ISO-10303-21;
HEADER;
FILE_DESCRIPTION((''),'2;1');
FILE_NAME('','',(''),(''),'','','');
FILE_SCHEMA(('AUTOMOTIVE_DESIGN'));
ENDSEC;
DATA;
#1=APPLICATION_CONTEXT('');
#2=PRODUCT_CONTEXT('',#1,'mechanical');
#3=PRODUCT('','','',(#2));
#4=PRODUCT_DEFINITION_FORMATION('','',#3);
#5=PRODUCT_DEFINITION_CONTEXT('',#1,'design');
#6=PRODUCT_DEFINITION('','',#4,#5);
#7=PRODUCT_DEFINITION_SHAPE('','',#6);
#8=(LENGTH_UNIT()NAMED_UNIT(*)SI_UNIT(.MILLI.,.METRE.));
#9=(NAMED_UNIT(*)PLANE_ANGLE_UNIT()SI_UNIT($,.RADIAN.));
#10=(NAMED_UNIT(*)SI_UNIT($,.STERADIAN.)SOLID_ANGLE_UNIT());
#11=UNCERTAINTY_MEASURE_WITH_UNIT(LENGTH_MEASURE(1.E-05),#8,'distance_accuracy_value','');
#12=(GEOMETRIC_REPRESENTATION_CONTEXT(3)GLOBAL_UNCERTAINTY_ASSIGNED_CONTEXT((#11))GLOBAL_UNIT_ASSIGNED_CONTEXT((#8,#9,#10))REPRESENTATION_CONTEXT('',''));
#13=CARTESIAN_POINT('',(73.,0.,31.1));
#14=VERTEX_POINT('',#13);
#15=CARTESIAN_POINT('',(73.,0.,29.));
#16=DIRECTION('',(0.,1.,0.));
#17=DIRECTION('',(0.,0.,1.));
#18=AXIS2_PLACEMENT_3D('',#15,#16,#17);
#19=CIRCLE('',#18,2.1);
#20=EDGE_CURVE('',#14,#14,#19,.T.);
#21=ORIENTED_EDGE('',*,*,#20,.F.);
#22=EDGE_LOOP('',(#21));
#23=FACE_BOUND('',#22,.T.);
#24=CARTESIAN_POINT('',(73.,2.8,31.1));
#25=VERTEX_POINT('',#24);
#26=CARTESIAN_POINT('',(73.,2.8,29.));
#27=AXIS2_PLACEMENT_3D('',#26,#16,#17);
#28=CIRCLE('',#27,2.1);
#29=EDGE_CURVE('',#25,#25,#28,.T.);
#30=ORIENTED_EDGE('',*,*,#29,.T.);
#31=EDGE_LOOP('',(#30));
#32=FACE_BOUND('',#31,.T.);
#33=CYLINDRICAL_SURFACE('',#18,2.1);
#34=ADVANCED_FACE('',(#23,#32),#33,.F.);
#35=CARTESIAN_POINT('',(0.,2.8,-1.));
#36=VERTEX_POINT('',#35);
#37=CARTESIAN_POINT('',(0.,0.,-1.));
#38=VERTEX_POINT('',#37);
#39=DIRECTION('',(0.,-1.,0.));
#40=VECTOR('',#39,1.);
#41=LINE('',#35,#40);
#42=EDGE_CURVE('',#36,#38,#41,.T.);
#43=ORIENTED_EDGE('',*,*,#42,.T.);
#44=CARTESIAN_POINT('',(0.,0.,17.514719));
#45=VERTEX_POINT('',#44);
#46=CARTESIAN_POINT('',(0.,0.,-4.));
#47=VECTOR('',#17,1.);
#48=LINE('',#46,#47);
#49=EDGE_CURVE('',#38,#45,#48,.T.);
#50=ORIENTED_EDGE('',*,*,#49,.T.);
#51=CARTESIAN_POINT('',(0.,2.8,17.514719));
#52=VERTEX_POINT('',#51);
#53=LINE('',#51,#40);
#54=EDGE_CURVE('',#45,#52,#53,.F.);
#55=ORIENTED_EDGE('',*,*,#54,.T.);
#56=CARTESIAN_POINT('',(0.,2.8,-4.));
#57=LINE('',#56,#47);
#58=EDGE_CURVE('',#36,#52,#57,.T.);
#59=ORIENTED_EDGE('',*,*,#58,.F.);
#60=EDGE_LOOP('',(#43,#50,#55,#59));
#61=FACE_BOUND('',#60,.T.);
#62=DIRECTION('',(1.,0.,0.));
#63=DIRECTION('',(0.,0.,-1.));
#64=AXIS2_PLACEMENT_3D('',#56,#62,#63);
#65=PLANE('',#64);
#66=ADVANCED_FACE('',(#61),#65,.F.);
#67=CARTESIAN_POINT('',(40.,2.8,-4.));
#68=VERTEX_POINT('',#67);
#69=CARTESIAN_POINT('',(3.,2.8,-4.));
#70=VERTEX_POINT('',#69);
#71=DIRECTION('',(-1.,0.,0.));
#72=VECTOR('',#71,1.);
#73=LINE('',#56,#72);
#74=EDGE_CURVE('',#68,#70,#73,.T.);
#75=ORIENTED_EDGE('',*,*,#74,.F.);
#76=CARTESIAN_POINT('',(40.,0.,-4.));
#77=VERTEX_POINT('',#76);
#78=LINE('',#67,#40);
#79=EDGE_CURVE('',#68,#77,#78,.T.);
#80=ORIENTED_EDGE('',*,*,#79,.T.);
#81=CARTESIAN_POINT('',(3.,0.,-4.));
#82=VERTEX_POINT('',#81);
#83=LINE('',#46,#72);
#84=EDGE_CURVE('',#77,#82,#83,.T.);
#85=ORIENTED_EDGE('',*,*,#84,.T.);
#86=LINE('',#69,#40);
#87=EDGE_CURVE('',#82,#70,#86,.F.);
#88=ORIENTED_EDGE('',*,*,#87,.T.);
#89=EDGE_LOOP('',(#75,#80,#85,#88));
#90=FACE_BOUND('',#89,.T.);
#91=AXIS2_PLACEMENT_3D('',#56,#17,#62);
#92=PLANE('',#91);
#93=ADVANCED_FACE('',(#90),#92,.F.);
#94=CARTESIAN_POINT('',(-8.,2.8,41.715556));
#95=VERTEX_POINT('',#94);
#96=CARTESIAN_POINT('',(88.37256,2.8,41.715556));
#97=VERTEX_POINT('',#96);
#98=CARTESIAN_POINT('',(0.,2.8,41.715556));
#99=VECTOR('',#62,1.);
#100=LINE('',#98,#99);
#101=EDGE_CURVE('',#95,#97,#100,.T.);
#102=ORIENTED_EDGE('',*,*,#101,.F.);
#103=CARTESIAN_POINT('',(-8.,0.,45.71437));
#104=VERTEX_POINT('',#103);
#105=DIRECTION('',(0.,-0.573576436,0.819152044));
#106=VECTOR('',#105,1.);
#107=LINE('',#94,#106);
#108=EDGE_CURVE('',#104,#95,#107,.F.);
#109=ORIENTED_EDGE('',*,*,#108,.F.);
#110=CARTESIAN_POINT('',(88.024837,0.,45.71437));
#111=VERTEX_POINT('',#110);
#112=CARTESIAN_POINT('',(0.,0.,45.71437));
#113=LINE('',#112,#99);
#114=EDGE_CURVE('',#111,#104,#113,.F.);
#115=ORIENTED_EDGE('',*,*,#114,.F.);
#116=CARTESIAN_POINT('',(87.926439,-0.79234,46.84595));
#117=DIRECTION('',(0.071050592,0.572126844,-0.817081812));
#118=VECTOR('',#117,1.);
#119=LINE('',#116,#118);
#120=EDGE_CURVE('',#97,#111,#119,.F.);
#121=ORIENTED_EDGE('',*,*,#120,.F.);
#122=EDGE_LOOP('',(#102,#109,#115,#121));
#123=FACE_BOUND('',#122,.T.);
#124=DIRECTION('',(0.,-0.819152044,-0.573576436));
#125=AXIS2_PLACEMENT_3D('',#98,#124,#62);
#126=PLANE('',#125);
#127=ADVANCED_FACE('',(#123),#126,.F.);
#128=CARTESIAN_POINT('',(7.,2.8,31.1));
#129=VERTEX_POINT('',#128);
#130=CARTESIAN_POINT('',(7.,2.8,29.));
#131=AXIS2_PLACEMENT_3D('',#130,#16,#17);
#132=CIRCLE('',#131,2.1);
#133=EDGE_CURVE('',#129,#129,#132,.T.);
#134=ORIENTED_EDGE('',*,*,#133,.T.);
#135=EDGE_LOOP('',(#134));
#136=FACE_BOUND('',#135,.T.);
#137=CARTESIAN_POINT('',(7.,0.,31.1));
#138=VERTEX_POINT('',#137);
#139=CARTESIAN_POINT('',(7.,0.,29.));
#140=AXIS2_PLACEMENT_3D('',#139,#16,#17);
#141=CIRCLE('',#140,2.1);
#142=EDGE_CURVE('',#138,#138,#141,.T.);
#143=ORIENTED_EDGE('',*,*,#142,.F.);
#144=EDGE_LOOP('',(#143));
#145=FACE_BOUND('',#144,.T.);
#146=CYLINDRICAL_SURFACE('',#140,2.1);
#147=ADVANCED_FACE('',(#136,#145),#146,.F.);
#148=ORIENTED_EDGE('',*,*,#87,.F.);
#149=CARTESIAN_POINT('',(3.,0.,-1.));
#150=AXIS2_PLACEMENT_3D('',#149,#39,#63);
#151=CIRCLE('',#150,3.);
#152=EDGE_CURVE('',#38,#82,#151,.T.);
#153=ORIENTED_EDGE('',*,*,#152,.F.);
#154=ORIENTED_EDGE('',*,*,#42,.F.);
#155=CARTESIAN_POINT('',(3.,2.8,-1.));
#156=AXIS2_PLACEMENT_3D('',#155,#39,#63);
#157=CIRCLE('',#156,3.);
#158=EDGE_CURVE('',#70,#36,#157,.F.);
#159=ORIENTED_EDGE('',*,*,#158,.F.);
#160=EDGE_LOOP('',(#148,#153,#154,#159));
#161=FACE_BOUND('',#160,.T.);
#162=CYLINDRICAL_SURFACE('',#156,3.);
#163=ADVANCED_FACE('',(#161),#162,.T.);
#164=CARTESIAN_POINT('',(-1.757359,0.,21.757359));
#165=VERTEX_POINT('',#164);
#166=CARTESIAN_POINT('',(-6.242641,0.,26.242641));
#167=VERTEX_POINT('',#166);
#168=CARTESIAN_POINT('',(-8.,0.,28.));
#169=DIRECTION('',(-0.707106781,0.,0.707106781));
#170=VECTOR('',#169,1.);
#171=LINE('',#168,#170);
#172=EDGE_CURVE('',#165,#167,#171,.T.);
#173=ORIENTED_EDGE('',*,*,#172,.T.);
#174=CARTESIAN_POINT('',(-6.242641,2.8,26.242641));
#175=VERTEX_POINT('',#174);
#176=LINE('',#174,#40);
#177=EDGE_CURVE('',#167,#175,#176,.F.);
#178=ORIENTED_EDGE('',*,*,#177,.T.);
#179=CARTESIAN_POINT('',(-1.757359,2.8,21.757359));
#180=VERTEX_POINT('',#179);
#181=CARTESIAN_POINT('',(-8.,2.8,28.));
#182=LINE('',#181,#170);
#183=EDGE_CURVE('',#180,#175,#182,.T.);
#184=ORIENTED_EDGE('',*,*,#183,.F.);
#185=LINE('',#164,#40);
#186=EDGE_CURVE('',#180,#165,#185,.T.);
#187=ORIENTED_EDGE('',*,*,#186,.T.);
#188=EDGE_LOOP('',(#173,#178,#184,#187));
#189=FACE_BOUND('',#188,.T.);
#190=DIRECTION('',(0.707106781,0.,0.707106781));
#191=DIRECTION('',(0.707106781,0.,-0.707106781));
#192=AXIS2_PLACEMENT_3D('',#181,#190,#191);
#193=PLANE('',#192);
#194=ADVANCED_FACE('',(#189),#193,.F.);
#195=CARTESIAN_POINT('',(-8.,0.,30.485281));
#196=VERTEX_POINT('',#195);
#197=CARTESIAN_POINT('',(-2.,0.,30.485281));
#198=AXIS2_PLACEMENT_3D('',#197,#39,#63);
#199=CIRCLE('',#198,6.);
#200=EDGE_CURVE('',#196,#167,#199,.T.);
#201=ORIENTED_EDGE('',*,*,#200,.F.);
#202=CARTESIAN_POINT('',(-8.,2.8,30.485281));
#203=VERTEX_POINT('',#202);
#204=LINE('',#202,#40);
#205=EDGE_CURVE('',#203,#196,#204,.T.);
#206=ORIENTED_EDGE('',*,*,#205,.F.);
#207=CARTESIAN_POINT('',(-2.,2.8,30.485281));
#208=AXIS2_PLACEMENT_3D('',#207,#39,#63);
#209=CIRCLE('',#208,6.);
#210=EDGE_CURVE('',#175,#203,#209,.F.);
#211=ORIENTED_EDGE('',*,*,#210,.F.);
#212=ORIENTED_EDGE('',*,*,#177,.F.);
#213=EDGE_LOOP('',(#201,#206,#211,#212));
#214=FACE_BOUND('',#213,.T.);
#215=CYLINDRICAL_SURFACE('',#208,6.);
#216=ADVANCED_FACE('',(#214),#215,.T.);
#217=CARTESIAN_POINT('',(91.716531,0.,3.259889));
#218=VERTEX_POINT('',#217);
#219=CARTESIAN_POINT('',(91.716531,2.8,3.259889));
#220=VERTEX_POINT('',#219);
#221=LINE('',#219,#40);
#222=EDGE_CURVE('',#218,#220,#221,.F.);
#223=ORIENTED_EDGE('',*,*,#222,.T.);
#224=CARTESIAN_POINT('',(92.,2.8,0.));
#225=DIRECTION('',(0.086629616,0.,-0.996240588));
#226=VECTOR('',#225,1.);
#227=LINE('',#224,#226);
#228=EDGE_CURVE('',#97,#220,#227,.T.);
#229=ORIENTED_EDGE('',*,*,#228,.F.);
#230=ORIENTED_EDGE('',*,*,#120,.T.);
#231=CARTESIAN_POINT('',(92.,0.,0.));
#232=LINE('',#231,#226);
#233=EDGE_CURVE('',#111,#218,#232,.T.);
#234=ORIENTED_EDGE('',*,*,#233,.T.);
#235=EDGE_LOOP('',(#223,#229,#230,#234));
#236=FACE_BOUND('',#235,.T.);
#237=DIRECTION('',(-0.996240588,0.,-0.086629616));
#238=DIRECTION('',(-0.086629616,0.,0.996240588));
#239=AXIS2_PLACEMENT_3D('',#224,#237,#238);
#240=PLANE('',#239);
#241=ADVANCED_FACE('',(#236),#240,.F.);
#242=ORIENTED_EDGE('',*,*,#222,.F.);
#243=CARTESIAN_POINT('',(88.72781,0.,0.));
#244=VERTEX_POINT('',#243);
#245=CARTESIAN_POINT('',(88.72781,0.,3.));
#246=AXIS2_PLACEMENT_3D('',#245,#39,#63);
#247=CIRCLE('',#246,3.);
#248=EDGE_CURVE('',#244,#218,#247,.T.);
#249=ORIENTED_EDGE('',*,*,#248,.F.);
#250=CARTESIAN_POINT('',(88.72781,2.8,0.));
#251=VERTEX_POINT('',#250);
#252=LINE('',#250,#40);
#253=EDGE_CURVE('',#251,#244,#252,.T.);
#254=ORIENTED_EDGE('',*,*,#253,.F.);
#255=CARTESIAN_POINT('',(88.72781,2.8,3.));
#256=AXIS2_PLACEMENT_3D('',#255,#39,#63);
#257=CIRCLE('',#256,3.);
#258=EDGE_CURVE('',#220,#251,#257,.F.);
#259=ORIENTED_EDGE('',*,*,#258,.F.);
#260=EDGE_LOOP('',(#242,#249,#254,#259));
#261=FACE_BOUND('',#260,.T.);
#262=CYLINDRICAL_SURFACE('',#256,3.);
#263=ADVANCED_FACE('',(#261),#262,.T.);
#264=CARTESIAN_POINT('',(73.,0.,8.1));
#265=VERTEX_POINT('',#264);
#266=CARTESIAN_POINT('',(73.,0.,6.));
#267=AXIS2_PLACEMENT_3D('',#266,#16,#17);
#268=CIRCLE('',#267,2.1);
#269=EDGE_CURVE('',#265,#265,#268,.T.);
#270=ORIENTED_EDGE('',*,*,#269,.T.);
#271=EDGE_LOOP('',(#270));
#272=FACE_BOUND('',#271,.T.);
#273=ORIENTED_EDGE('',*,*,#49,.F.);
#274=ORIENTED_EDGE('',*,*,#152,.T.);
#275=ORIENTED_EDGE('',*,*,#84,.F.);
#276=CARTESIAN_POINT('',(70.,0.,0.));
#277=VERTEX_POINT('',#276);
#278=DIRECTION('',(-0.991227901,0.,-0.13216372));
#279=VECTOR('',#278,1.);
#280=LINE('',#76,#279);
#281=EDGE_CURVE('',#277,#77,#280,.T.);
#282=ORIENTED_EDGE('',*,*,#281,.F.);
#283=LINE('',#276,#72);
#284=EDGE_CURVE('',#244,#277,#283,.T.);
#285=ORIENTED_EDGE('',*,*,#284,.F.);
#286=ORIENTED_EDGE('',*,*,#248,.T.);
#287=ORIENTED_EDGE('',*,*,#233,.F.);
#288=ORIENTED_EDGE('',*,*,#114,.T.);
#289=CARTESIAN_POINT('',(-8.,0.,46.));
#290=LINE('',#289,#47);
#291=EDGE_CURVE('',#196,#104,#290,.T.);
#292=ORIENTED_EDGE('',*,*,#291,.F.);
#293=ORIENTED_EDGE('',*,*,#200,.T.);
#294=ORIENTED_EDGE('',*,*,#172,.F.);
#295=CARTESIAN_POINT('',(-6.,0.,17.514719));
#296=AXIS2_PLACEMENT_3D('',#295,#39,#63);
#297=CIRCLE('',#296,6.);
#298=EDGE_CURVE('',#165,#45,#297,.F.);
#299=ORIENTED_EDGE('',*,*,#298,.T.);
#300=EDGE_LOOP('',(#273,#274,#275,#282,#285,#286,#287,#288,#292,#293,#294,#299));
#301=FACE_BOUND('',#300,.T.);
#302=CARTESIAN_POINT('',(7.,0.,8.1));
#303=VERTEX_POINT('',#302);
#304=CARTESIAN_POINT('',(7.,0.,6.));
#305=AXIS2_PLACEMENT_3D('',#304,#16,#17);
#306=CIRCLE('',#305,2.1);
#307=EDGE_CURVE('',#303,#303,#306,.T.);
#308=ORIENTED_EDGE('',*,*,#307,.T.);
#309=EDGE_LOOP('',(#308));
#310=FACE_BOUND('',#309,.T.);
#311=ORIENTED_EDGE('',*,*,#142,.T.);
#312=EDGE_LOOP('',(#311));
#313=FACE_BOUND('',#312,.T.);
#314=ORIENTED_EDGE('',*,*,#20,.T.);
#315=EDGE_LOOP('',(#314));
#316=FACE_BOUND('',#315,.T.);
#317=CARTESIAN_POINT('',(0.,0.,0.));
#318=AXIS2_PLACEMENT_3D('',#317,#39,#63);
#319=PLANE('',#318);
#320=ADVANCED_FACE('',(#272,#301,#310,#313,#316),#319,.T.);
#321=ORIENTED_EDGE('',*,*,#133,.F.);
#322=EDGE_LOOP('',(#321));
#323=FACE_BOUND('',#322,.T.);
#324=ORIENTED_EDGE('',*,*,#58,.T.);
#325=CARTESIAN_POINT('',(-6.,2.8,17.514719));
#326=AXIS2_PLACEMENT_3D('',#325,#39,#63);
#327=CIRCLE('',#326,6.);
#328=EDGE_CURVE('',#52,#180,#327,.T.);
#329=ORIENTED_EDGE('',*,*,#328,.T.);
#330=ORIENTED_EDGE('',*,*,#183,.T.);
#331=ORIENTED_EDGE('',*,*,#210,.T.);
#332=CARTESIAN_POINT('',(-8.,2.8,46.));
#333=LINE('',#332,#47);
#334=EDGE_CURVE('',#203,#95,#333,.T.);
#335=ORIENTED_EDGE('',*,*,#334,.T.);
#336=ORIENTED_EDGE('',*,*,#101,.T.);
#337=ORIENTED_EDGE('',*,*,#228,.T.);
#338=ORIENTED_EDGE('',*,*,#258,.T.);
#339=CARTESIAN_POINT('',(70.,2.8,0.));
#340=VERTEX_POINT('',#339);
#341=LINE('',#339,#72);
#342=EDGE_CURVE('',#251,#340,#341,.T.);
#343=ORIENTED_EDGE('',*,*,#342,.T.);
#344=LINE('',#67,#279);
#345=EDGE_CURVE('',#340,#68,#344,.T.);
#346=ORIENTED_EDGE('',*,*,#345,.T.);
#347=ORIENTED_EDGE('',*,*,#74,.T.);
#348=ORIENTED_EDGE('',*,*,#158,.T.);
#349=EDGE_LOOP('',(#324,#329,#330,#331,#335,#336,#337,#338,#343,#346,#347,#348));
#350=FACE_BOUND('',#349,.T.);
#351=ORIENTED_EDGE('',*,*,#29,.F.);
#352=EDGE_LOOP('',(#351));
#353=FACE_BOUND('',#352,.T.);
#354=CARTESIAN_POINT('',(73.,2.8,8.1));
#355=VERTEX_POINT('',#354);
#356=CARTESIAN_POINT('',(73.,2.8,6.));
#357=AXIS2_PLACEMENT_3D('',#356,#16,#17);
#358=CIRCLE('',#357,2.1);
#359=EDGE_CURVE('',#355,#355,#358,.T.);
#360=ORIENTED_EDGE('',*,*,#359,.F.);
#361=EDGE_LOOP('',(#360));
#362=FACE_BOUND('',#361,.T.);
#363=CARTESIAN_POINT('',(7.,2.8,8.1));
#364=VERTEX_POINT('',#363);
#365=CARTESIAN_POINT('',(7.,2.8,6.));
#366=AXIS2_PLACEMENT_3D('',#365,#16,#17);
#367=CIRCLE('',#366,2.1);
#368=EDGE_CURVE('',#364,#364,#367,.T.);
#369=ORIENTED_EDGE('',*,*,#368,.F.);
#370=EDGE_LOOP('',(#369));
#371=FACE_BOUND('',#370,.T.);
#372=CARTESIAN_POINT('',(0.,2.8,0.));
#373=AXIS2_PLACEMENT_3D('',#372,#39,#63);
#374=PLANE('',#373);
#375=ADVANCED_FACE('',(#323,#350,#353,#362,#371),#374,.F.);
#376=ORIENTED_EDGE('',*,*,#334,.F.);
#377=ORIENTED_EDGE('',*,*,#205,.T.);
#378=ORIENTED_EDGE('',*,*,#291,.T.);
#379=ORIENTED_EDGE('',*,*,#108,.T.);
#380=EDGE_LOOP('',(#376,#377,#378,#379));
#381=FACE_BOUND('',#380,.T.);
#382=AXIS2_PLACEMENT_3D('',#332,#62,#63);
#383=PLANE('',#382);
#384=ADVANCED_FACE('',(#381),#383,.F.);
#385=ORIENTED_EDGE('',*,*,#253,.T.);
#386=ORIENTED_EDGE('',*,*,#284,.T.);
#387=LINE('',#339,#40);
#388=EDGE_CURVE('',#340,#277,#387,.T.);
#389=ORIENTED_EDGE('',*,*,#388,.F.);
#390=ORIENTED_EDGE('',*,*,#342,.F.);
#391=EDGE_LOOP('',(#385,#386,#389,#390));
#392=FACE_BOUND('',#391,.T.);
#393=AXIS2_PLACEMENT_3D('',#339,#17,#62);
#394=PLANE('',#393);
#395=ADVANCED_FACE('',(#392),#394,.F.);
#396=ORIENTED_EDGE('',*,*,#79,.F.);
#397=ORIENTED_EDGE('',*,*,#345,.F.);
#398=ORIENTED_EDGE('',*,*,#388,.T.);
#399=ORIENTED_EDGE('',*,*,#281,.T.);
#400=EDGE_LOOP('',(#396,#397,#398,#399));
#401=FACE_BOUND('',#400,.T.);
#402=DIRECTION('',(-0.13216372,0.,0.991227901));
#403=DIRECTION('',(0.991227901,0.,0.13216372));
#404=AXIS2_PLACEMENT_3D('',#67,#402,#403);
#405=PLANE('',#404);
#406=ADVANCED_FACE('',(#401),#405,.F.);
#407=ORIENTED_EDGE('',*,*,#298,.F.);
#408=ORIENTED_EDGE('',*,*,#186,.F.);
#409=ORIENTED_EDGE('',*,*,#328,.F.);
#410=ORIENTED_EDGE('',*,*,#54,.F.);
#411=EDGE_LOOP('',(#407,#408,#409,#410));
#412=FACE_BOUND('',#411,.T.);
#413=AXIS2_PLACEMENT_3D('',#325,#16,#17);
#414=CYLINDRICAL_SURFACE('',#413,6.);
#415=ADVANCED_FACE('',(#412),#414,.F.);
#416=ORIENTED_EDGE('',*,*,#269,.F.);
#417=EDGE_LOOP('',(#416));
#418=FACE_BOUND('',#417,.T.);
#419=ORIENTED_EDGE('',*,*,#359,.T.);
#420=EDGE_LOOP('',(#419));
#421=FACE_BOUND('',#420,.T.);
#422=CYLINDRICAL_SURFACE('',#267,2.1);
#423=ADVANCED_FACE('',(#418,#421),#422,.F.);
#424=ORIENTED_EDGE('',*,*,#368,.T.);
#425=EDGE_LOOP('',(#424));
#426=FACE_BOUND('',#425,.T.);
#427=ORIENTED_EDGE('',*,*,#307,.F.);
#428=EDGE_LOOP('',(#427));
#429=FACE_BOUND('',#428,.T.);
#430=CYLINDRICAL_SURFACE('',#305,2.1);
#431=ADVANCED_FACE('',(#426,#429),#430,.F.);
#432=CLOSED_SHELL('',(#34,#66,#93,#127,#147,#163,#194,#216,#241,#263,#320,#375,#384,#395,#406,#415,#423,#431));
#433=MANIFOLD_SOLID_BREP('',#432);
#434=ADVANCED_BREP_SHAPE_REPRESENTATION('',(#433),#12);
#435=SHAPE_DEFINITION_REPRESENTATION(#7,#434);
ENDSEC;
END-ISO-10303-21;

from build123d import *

# Parameters (mm, degrees)
BOSS_EXTRUDE1_DEPTH = 2.8
SKETCH2_R           = 2.1
CUT_EXTRUDE1_DEPTH  = 103.897230283
FILLET1_R           = 6
CHAMFER2_SIZE       = 4.28444402
CHAMFER2_SIZE_2     = 3
FILLET2_R           = 3


with BuildPart() as part:
    # Sketch1 → Boss-Extrude1 (new body)
    with BuildSketch(Plane(origin=(0, 0, 0), x_dir=(1, 0, 0), z_dir=(0, 1, 0))):
        Polygon((0, 4), (40, 4), (70, 0), (92, 0), (88, -46), (0, -46), (-8, -46), (-8, -28), (0, -20), align=None)
    extrude(amount=BOSS_EXTRUDE1_DEPTH)

    # Sketch2 → Cut-Extrude1 (cut, through all)
    with BuildSketch(Plane(origin=(0, 2.8, 0), x_dir=(1, 0, 0), z_dir=(0, 1, 0))):
        with Locations(Location((7, -6, 0), (0, 0, 270))):
            Circle(SKETCH2_R)
        with Locations(Location((7, -29, 0), (0, 0, 270))):
            Circle(SKETCH2_R)
        with Locations(Location((73, -6, 0), (0, 0, 270))):
            Circle(SKETCH2_R)
        with Locations(Location((73, -29, 0), (0, 0, 270))):
            Circle(SKETCH2_R)
    extrude(amount=-CUT_EXTRUDE1_DEPTH, mode=Mode.SUBTRACT)

    # Fillet1
    fillet1_edges = [part.edges().sort_by_distance(p)[0] for p in [
        (-8, 1.4, 28),
        (0, 1.4, 20),
    ]]
    fillet(fillet1_edges, radius=FILLET1_R)

    # Chamfer2
    # the kernel refuses this chamfer: 4.28444402, 3 mm, written as the material it takes off along each edge
    with BuildSketch(Plane(origin=(99.06480046, 2.8, 46), x_dir=(0, 0.02220967419845692, -0.99975333476413), z_dir=(-1, 0, 0))) as chamfer2_piece_1:
        Polygon((CHAMFER2_SIZE * 0.999753334817, CHAMFER2_SIZE * 0.0222096741996), (-CHAMFER2_SIZE_2 * 0.0222096741985, CHAMFER2_SIZE_2 * 0.999753334764), (0, 0), align=None)
    extrude(amount=118.12960092, mode=Mode.SUBTRACT)

    # Fillet2
    fillet2_edges = [part.edges().sort_by_distance(p)[0] for p in [
        (0, 1.4, -4),
        (92, 1.4, 0),
    ]]
    fillet(fillet2_edges, radius=FILLET2_R)


solid = part.part
